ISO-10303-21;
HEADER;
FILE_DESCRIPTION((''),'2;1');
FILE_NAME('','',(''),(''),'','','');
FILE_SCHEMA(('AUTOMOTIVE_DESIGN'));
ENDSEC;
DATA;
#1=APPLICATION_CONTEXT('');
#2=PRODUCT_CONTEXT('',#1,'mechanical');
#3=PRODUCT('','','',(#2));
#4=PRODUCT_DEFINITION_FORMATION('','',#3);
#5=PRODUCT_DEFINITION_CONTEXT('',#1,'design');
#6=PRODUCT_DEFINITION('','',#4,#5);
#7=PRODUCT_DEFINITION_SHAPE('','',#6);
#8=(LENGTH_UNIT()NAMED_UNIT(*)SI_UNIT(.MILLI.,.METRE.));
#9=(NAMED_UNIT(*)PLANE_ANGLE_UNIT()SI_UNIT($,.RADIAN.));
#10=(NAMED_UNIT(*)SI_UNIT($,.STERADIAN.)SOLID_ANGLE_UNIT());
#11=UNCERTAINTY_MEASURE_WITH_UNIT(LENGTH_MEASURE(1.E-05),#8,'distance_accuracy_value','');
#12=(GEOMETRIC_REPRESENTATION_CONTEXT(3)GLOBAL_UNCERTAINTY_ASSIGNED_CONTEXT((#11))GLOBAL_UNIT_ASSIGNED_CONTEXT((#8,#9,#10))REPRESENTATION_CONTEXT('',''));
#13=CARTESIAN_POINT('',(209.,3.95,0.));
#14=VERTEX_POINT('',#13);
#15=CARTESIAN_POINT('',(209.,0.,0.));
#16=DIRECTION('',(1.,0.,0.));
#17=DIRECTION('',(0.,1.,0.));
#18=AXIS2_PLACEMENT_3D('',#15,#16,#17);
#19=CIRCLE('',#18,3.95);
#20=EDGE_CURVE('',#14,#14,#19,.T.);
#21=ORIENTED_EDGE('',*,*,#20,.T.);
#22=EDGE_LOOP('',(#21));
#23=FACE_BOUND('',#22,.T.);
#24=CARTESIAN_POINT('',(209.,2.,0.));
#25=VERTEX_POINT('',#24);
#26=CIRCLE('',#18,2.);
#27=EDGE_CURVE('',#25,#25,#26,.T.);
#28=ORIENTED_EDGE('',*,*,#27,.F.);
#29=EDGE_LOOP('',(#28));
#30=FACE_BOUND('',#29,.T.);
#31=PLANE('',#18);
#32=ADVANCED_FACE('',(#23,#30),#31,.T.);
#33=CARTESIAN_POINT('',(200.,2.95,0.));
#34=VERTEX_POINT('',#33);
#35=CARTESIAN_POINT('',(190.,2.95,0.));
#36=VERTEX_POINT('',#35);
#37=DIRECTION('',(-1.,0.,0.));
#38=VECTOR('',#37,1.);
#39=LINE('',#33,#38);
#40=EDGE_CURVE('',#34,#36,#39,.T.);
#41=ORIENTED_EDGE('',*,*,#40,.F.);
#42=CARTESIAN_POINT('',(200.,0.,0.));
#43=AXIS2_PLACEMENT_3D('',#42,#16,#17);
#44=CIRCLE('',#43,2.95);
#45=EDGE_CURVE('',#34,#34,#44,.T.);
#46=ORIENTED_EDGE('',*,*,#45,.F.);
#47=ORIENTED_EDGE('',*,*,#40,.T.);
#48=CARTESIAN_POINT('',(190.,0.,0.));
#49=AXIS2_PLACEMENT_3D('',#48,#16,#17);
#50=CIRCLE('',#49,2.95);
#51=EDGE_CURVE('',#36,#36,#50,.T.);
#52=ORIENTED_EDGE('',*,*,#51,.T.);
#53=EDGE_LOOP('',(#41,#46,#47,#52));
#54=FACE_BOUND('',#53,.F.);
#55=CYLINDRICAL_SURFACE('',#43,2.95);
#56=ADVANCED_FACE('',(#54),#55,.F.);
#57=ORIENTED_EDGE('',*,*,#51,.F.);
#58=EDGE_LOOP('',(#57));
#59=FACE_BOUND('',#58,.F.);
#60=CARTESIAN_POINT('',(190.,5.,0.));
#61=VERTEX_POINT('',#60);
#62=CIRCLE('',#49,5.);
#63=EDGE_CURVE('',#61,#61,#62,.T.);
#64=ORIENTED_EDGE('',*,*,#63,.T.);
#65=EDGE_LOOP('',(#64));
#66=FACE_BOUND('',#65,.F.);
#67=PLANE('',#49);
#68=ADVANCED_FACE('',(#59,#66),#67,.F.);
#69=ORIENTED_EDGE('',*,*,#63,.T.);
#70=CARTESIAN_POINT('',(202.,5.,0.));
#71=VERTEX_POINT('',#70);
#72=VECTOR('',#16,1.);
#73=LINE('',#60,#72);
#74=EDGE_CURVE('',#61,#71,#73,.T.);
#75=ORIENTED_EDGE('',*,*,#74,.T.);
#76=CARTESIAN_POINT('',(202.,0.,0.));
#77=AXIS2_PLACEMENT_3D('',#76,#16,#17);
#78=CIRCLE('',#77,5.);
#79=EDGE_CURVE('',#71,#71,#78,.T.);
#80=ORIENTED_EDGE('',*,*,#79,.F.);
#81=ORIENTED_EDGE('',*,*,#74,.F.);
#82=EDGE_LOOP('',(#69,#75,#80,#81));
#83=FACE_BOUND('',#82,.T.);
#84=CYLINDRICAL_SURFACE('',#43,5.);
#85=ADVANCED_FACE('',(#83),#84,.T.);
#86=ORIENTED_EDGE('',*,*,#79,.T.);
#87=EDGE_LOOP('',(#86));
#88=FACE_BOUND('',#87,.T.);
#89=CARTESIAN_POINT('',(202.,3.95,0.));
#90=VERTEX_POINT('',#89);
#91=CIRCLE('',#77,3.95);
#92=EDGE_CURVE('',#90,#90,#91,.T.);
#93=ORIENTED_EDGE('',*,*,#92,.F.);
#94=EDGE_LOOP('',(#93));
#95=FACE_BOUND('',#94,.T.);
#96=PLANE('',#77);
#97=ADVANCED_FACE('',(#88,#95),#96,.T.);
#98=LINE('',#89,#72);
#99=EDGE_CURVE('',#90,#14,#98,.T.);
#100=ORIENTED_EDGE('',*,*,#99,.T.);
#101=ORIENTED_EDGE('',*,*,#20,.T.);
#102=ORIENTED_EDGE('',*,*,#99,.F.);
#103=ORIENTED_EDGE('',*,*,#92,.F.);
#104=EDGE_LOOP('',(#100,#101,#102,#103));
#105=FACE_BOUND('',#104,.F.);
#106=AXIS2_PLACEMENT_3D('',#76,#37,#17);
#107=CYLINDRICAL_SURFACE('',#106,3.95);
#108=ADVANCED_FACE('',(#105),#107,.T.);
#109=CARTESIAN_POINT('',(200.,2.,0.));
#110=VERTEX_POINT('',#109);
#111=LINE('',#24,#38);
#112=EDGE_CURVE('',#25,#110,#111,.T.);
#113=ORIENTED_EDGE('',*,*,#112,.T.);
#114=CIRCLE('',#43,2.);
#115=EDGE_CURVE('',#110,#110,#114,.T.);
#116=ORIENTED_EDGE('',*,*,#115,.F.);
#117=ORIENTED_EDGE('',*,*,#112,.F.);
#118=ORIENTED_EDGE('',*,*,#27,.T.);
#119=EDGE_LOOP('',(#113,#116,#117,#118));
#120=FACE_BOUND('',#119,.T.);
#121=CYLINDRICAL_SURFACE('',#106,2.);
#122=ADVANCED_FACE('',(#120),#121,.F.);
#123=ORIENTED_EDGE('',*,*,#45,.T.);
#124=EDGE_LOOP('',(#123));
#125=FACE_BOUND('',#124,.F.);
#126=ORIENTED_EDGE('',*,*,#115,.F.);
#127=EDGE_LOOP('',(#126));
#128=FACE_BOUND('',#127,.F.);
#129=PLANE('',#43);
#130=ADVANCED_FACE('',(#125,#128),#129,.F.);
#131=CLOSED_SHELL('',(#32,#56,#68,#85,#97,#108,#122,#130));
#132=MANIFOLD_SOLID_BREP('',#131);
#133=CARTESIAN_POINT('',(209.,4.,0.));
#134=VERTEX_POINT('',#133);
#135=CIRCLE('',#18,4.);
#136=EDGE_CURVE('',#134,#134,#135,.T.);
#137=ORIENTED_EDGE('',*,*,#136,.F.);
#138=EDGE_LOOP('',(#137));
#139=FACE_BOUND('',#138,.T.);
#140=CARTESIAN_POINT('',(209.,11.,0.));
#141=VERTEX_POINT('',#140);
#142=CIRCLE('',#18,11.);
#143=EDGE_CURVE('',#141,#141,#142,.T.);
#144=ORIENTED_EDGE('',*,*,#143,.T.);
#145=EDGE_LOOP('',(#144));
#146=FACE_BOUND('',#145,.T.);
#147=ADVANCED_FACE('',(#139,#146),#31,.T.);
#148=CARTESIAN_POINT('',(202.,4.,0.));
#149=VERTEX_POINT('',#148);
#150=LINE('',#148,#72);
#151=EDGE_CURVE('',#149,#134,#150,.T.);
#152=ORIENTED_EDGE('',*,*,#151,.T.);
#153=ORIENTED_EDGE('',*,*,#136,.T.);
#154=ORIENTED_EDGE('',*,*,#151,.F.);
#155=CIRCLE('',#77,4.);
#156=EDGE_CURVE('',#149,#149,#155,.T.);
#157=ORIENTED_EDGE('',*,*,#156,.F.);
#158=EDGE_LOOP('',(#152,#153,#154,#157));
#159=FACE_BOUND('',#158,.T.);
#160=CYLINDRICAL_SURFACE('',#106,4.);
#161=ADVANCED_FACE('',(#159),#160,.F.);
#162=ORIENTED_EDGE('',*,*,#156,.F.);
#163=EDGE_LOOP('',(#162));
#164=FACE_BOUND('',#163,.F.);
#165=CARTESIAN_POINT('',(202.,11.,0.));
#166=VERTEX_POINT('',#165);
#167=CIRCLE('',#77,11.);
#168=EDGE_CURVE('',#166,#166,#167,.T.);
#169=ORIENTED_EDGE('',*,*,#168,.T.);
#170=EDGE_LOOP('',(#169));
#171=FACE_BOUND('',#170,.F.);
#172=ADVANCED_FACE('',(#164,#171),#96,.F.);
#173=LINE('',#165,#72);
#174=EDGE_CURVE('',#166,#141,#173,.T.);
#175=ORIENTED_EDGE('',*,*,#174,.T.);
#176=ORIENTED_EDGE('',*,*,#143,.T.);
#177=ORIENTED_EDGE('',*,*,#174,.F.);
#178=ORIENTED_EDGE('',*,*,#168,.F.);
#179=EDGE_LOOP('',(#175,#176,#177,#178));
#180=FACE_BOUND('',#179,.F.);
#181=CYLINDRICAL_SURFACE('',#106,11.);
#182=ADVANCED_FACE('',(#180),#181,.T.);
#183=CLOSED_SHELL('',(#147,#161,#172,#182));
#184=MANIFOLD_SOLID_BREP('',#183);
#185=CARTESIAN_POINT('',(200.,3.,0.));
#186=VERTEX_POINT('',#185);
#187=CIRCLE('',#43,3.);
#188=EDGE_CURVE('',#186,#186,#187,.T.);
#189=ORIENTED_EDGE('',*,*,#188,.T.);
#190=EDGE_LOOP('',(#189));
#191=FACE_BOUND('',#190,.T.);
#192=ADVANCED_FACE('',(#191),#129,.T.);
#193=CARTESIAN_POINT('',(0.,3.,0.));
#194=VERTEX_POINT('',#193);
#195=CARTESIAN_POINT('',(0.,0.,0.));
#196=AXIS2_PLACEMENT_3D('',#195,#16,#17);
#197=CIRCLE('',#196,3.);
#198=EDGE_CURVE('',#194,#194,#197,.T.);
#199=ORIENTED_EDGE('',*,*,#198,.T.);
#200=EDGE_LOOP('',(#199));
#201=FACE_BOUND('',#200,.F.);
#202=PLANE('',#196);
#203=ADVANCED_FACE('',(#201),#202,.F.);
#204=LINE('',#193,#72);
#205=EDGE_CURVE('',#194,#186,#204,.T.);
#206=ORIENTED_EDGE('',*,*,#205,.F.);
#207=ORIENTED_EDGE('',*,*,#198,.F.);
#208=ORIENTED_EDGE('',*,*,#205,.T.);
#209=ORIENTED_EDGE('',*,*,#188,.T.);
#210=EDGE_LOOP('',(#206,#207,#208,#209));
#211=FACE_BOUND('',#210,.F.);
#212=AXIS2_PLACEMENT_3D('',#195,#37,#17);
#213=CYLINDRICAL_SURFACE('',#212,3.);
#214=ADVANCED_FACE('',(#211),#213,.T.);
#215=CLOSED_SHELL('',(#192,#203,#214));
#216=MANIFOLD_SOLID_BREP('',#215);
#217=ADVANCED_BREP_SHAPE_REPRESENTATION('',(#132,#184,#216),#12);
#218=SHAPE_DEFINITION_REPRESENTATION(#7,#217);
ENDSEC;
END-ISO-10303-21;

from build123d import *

# Parameters (mm, degrees)
F0_R     = 3
F1_DEPTH = 200
F2_R     = 5
F2_R_2   = 3
F2_R_3   = 2.95
F2_R_4   = 2
F3_DEPTH = 2
F4_DEPTH = 10
F5_R     = 3.95
F5_R_2   = 2
F6_DEPTH = 7
F7_R     = 11
F7_R_2   = 5
F7_R_3   = 4
F8_DEPTH = 7


with BuildPart() as f1:
    # F0 (on Right) → F1 (new body)
    with BuildSketch(Plane.YZ):
        Circle(F0_R)
    extrude(amount=F1_DEPTH)


with BuildPart() as f3:
    # F2 (on face) → F3 (new body)
    with BuildSketch(Plane.YZ.offset(200)):
        Circle(F2_R)
        Circle(F2_R_2, mode=Mode.SUBTRACT)
        Circle(F2_R_2)
        Circle(F2_R_3, mode=Mode.SUBTRACT)
        Circle(F2_R_3)
        Circle(F2_R_4, mode=Mode.SUBTRACT)
    extrude(amount=F3_DEPTH)

    # F2 (on face) → F4 (join)
    with BuildSketch(Plane.YZ.offset(200)):
        Circle(F2_R)
        Circle(F2_R_2, mode=Mode.SUBTRACT)
        Circle(F2_R_2)
        Circle(F2_R_3, mode=Mode.SUBTRACT)
    extrude(amount=-F4_DEPTH)

    # F5 (on face) → F6 (join)
    with BuildSketch(Plane.YZ.offset(202)):
        Circle(F5_R)
        Circle(F5_R_2, mode=Mode.SUBTRACT)
    extrude(amount=F6_DEPTH)


with BuildPart() as f8:
    # F7 (on face) → F8 (new body)
    with BuildSketch(Plane.YZ.offset(202)):
        Circle(F7_R)
        Circle(F7_R_2, mode=Mode.SUBTRACT)
        Circle(F7_R_2)
        Circle(F7_R_3, mode=Mode.SUBTRACT)
    extrude(amount=F8_DEPTH)


solid = Compound([f1.part, f3.part, f8.part])
